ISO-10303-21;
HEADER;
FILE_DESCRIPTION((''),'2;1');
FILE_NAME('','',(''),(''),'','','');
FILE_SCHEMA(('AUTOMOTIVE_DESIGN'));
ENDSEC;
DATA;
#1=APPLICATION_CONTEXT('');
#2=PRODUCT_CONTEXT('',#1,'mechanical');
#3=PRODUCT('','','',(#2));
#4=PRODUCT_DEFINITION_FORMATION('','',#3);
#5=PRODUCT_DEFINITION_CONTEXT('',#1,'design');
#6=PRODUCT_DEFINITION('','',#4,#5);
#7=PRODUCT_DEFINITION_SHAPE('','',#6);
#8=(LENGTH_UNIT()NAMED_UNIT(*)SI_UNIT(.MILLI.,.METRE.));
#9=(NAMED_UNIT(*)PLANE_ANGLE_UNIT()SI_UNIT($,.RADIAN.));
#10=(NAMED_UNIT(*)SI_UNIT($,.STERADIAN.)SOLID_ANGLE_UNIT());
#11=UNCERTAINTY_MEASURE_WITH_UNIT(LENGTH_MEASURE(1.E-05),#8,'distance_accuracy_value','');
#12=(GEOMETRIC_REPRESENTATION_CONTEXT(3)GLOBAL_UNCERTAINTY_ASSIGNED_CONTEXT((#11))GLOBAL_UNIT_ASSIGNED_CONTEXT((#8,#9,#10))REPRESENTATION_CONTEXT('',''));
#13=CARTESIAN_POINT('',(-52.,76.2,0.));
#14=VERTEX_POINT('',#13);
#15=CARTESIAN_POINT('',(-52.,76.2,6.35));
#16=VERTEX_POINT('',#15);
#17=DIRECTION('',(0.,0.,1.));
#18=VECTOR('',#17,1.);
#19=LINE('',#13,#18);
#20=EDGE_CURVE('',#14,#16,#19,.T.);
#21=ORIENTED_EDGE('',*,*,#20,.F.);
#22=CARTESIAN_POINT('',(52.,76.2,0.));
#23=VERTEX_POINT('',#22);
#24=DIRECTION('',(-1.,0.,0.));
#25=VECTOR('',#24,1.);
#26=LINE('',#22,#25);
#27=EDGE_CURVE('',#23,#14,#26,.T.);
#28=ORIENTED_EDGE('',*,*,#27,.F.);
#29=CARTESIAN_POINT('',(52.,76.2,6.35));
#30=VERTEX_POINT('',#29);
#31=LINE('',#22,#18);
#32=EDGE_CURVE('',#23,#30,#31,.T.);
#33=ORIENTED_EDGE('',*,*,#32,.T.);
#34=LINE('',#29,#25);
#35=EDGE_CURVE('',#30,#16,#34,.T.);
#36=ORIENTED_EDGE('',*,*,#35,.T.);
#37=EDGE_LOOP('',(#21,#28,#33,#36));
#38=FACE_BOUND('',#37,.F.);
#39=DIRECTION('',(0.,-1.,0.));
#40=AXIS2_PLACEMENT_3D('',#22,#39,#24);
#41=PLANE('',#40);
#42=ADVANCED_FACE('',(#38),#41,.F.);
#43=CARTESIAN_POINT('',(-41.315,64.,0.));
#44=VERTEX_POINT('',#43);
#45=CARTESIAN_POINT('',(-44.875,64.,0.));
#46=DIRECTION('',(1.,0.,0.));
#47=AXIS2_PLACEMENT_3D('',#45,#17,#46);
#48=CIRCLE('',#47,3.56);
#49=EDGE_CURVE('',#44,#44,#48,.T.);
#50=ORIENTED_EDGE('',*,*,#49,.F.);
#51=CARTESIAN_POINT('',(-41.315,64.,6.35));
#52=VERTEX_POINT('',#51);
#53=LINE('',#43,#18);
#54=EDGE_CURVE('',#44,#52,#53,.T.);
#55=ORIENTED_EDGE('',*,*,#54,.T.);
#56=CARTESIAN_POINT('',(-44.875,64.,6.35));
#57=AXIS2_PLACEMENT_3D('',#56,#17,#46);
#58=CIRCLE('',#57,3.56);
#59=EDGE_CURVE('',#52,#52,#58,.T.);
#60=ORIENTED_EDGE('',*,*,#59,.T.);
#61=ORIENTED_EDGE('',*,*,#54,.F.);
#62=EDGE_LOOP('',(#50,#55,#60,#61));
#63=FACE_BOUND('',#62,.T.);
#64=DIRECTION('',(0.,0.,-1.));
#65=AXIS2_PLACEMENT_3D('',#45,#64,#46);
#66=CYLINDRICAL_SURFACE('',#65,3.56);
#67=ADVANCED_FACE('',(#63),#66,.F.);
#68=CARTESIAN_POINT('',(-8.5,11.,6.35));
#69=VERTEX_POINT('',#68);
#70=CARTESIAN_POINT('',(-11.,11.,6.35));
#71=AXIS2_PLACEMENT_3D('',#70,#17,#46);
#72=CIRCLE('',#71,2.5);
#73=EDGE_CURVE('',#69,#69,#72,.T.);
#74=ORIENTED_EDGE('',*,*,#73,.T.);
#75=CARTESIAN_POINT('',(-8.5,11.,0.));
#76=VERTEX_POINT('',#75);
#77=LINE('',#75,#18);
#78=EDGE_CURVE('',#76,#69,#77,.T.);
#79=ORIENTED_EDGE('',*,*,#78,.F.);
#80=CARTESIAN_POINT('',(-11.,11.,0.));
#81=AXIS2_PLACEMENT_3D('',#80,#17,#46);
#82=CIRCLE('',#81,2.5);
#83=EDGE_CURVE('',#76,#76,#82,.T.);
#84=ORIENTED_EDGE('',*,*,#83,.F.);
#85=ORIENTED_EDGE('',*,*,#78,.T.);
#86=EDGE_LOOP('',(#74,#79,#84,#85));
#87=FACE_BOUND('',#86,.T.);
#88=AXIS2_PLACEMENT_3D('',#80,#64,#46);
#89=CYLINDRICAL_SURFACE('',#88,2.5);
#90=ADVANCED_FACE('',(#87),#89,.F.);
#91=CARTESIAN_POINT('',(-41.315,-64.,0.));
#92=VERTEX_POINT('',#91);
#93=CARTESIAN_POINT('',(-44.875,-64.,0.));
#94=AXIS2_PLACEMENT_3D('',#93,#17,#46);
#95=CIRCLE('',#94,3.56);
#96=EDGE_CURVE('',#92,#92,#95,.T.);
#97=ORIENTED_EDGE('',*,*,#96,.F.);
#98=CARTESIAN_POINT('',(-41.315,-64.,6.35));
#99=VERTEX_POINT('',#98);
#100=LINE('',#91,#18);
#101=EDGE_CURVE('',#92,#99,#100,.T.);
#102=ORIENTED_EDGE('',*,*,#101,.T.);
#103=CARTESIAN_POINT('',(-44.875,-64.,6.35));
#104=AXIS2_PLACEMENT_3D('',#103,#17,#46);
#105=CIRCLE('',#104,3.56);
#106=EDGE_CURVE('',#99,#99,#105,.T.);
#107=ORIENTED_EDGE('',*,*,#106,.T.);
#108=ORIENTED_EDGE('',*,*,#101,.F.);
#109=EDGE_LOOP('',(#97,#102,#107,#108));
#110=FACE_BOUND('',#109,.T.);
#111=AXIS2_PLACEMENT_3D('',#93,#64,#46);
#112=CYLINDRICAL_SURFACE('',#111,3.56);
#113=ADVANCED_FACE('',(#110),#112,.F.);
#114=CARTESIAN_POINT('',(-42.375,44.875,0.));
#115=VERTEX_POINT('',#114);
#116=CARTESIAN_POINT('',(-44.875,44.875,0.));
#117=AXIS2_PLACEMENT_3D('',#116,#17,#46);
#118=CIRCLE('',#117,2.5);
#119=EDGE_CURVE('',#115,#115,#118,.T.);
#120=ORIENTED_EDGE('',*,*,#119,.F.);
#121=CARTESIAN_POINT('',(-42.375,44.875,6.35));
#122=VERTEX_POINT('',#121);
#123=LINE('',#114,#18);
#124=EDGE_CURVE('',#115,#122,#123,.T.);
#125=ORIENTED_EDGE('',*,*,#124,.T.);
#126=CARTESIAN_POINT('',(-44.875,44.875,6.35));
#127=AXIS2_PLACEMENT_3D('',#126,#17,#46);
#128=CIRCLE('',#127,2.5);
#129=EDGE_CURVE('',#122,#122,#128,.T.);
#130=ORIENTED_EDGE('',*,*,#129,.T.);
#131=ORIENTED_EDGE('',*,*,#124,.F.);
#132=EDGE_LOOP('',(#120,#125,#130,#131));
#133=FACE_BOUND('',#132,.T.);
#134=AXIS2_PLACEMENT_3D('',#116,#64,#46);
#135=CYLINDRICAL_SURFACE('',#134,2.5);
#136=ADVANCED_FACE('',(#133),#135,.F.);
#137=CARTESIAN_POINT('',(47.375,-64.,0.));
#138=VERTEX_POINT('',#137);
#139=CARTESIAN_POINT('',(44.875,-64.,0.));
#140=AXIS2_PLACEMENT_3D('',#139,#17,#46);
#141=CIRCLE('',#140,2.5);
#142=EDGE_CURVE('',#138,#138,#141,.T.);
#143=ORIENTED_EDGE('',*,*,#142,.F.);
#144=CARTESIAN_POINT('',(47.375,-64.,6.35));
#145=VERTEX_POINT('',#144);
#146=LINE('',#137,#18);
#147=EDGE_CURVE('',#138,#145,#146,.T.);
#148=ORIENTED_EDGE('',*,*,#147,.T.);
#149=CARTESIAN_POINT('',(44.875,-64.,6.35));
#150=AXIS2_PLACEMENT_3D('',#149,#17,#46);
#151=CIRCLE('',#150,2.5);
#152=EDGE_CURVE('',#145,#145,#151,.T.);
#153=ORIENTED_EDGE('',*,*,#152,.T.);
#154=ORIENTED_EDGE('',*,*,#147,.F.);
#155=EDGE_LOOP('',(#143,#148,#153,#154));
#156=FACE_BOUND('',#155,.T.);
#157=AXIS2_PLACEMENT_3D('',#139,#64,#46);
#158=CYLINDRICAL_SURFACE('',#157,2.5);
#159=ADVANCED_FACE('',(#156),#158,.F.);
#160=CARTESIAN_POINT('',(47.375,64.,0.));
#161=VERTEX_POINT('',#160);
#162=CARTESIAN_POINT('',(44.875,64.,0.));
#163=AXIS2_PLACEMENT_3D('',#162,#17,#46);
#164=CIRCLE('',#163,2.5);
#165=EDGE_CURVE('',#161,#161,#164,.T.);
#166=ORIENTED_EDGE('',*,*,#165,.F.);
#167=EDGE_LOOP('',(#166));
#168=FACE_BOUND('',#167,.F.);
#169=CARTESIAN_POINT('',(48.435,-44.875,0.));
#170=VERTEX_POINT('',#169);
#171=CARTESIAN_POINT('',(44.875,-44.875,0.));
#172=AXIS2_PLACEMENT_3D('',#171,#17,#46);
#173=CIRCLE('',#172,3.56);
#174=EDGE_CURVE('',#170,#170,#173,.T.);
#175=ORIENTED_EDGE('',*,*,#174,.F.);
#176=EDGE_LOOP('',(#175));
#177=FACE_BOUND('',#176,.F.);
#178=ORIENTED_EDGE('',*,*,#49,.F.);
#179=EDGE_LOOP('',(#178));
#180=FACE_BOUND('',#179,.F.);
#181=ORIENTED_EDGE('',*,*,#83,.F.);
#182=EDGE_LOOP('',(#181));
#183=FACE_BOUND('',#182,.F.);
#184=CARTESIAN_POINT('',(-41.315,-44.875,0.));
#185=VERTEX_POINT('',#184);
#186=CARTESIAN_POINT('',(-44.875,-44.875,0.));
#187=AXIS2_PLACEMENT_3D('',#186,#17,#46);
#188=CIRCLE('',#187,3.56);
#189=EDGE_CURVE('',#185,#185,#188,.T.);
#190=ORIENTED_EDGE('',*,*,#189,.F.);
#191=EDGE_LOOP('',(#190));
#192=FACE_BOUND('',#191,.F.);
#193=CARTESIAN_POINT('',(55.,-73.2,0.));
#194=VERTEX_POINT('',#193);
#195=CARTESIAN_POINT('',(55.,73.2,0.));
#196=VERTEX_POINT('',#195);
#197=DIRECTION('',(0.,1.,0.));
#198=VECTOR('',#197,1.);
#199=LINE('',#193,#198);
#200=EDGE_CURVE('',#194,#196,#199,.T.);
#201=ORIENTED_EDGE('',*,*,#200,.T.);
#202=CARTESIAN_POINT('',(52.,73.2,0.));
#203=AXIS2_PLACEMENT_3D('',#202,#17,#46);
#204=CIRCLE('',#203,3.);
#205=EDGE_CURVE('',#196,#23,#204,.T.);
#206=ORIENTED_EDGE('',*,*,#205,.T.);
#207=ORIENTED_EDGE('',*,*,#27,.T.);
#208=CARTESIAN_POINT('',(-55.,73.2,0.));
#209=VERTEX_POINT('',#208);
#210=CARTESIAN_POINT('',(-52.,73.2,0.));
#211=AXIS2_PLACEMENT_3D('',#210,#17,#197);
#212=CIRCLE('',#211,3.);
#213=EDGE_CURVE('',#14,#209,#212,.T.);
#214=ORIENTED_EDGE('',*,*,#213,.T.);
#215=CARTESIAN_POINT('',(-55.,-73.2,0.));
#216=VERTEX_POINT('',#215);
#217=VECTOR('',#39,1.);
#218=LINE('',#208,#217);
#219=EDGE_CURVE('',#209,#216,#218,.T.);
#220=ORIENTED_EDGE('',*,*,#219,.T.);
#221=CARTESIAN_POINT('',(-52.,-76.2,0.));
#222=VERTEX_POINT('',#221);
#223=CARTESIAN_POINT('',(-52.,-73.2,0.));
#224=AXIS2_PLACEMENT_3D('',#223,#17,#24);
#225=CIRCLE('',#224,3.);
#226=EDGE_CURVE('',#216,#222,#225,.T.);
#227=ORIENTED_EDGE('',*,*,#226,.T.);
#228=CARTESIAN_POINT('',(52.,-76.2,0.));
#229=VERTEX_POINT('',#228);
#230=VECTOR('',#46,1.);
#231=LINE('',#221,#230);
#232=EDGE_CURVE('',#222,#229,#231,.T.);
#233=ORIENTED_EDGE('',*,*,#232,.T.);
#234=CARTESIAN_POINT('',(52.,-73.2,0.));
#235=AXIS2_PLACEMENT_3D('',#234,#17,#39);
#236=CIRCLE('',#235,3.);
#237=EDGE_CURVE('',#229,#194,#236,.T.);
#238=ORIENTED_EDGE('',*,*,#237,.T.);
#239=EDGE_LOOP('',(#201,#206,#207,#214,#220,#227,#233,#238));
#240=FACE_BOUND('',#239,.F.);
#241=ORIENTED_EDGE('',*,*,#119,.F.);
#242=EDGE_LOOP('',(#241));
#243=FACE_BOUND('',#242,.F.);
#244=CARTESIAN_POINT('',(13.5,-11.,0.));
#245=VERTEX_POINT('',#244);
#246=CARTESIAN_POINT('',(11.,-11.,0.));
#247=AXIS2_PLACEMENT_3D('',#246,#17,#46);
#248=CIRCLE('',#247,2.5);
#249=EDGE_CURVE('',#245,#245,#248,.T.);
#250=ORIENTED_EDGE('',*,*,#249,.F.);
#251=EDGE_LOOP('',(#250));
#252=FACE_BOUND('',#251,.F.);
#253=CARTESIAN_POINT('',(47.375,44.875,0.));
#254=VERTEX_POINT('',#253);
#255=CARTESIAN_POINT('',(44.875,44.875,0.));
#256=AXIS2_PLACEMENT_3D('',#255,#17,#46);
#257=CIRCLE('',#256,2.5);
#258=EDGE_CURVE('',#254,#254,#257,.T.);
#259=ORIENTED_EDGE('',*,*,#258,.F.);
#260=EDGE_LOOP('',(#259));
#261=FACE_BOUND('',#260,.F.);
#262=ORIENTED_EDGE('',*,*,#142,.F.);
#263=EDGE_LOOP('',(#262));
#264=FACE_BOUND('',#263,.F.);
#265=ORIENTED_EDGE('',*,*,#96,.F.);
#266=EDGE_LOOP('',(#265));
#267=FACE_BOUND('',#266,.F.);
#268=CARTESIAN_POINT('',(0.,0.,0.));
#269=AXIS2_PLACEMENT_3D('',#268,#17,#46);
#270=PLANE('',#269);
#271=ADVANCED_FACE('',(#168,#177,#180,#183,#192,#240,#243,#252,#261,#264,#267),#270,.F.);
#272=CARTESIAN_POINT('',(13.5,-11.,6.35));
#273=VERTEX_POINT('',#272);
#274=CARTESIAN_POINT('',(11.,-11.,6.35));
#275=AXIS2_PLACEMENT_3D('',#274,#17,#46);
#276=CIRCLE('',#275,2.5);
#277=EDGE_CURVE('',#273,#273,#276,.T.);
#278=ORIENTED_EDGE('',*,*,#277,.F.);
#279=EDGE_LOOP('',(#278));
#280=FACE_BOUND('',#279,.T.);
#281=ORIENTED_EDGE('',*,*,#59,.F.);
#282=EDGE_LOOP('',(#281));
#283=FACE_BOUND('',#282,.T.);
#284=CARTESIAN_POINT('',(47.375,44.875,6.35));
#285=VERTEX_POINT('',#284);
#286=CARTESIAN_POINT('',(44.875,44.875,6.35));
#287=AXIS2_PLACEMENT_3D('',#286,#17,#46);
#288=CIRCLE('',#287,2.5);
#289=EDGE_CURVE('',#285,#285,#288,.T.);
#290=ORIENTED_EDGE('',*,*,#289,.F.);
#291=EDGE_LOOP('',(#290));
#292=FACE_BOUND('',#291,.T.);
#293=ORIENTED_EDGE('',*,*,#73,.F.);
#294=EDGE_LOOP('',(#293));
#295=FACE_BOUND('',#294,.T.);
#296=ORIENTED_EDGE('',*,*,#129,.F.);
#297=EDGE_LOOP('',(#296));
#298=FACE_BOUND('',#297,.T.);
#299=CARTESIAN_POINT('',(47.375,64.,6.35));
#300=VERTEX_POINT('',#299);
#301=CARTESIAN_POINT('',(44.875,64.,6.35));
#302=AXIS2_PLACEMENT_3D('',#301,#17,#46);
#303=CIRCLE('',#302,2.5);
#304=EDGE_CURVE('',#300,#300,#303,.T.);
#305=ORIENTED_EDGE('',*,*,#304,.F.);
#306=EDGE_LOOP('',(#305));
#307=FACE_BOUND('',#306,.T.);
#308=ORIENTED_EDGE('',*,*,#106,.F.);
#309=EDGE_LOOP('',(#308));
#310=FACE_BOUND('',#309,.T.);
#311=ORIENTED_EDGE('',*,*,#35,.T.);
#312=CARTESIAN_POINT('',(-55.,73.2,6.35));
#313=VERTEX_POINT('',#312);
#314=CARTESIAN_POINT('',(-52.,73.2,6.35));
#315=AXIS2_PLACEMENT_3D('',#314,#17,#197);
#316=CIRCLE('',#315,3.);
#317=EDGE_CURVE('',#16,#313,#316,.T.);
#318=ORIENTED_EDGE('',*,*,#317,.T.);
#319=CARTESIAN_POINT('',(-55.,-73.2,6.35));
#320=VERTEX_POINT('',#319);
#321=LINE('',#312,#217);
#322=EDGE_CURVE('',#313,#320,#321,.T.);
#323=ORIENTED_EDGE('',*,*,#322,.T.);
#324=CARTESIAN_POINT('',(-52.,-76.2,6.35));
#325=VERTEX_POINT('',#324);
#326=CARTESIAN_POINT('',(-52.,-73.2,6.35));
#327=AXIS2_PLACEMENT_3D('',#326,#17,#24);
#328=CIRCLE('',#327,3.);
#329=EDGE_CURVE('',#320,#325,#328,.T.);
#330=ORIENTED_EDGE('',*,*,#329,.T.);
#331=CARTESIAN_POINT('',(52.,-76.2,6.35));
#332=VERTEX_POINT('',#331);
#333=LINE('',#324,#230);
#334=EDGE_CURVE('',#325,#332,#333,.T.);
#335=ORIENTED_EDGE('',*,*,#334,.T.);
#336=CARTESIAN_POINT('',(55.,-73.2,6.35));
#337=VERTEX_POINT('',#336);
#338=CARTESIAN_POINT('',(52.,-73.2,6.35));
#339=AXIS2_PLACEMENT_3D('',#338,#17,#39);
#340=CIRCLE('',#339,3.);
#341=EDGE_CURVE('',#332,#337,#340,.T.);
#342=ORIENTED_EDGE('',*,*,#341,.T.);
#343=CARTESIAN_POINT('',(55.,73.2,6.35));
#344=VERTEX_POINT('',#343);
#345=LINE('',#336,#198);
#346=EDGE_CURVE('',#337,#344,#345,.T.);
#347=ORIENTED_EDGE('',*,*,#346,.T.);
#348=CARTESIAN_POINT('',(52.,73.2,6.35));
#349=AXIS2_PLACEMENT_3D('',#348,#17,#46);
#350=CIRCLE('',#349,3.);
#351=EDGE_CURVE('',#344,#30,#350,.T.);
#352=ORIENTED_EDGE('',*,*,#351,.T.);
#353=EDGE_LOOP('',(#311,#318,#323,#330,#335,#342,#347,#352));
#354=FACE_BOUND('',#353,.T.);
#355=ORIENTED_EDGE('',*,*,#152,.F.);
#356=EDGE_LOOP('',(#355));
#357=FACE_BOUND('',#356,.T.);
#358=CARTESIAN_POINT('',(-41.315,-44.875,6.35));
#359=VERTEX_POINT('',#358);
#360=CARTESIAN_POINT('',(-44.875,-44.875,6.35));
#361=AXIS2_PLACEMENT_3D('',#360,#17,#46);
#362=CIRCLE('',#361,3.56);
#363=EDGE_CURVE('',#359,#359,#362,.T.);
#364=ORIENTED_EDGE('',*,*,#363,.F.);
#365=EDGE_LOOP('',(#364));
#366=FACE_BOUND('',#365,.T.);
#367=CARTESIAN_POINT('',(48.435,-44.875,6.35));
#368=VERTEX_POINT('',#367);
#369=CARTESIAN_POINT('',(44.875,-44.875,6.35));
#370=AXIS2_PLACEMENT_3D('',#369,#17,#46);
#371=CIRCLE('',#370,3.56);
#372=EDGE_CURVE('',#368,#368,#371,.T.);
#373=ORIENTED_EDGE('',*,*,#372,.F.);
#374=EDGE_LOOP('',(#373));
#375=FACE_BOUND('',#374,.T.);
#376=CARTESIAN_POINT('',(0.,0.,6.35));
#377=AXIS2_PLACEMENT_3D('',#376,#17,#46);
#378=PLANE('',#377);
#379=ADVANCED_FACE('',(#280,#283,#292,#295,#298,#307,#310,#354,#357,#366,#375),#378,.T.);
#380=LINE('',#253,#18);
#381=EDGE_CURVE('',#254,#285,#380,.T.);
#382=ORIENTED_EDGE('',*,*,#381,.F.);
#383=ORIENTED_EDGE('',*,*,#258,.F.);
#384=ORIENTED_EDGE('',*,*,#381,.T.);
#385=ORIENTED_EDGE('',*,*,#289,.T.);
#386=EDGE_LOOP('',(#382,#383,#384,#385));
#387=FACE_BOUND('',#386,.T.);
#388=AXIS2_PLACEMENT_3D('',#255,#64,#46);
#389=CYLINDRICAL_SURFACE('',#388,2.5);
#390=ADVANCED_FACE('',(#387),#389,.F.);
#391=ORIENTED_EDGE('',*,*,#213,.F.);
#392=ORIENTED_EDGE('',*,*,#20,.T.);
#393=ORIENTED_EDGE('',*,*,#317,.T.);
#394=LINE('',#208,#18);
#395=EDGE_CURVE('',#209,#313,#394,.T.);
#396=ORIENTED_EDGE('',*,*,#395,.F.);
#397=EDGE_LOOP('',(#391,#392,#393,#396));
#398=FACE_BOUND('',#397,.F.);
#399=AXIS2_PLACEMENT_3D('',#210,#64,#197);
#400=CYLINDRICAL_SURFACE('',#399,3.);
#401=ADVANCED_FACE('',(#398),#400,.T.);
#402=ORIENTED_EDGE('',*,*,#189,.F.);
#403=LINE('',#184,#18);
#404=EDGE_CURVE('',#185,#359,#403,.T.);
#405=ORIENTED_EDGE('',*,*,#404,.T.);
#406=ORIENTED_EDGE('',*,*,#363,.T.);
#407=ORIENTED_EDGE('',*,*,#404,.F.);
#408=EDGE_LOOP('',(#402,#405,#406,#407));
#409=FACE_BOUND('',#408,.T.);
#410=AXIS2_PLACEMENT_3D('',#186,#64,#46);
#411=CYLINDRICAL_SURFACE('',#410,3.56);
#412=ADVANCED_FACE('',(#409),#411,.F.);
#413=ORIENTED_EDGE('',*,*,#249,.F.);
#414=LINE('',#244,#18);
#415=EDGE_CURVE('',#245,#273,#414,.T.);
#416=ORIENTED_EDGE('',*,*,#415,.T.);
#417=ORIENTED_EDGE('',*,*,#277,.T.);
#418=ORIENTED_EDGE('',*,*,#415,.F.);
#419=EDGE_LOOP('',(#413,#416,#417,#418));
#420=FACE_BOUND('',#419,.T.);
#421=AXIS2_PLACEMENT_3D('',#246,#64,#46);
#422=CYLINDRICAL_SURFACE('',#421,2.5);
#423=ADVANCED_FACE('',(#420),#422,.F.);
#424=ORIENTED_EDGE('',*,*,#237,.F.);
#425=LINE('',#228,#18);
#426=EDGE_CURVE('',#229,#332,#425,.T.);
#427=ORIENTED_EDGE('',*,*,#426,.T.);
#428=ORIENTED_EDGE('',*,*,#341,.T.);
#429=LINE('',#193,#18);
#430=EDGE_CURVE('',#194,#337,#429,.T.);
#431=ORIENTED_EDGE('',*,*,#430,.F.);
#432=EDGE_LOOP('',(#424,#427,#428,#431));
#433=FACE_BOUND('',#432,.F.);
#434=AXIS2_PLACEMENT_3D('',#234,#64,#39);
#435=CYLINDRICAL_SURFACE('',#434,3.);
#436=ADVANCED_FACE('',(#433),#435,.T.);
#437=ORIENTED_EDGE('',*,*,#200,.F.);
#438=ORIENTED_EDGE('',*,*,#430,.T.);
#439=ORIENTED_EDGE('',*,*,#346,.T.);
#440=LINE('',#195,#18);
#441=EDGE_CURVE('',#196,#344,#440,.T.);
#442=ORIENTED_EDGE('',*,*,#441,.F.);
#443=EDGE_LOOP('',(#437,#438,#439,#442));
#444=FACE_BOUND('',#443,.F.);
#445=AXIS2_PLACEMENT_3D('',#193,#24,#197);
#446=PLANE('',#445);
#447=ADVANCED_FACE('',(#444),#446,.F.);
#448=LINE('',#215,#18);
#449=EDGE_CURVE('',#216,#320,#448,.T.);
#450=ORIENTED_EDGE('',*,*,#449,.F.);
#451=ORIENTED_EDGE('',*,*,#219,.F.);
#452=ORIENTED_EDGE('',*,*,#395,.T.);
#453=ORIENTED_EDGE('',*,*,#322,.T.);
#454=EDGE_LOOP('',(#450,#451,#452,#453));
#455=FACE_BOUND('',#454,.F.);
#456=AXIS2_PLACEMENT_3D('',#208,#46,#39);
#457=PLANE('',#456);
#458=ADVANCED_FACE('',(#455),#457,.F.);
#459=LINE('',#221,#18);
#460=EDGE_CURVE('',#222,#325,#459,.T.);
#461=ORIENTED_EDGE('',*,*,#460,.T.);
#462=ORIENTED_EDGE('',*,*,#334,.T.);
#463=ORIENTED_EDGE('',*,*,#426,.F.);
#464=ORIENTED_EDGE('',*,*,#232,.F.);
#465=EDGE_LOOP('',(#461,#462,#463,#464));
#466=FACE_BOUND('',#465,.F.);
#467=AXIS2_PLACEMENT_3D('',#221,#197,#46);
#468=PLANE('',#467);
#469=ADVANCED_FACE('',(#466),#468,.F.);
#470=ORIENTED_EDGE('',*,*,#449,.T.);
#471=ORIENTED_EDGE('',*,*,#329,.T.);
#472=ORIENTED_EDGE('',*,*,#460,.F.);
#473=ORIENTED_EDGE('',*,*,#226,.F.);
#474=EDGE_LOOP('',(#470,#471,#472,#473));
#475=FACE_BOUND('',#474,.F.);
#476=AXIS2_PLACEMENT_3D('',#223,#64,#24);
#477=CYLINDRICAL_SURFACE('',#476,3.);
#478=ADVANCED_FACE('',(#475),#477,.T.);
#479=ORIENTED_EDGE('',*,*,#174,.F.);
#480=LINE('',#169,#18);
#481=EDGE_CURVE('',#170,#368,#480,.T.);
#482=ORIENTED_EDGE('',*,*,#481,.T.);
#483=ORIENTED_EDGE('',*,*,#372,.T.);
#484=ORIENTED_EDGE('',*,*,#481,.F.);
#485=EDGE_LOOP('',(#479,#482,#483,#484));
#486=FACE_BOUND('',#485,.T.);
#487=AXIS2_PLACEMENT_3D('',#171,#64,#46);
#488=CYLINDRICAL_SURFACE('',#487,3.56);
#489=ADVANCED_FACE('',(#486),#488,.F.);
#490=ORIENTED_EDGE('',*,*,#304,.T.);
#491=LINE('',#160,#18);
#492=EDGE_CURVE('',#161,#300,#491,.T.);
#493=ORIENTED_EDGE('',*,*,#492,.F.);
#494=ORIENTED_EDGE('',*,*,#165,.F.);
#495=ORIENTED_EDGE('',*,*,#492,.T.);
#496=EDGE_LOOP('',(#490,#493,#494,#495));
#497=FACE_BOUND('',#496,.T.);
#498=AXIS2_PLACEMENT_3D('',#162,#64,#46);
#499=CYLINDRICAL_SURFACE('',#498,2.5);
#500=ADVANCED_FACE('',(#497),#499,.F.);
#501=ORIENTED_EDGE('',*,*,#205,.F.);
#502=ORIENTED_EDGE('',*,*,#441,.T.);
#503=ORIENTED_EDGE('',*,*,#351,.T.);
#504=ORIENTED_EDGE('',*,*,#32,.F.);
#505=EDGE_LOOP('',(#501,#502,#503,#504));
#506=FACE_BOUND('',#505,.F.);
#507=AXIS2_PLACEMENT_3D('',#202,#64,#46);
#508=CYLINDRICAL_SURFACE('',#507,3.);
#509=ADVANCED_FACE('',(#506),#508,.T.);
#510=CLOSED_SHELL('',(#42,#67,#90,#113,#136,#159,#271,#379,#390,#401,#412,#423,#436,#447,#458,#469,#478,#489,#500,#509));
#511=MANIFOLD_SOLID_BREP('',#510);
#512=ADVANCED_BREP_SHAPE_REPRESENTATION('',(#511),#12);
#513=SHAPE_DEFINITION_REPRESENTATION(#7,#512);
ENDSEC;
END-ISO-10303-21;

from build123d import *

# Parameters (mm, degrees)
F0_R     = 3.56
F0_R_2   = 2.5
F1_DEPTH = 6.35


# Not quite as in the source:
# - a length typed as a fraction of an inch, garbled in the dataset ("3 / 203.2 mm" for 3/8 in), is restored


with BuildPart() as f1:
    # F0 (on Top) → F1 (new body)
    with BuildSketch(Plane.XY):
        with BuildLine():
            ThreePointArc((55, 73.2), (54.1213203436, 75.3213203436), (52, 76.2))
            Line((52, 76.2), (-52, 76.2))
            ThreePointArc((-52, 76.2), (-54.1213203436, 75.3213203436), (-55, 73.2))
            Line((-55, 73.2), (-55, -73.2))
            ThreePointArc((-55, -73.2), (-54.1213203436, -75.3213203436), (-52, -76.2))
            Line((-52, -76.2), (52, -76.2))
            ThreePointArc((52, -76.2), (54.1213203436, -75.3213203436), (55, -73.2))
            Line((55, -73.2), (55, 73.2))
        make_face()
        with Locations((-44.875, -64)):
            Circle(F0_R, mode=Mode.SUBTRACT)
        with Locations((-44.875, -44.875)):
            Circle(F0_R, mode=Mode.SUBTRACT)
        with Locations((44.875, -64)):
            Circle(F0_R_2, mode=Mode.SUBTRACT)
        with Locations((44.875, -44.875)):
            Circle(F0_R, mode=Mode.SUBTRACT)
        with Locations((11, -11)):
            Circle(F0_R_2, mode=Mode.SUBTRACT)
        with Locations((-11, 11)):
            Circle(F0_R_2, mode=Mode.SUBTRACT)
        with Locations((-44.875, 44.875)):
            Circle(F0_R_2, mode=Mode.SUBTRACT)
        with Locations((-44.875, 64)):
            Circle(F0_R, mode=Mode.SUBTRACT)
        with Locations((44.875, 44.875)):
            Circle(F0_R_2, mode=Mode.SUBTRACT)
        with Locations((44.875, 64)):
            Circle(F0_R_2, mode=Mode.SUBTRACT)
    extrude(amount=F1_DEPTH)


solid = f1.part
